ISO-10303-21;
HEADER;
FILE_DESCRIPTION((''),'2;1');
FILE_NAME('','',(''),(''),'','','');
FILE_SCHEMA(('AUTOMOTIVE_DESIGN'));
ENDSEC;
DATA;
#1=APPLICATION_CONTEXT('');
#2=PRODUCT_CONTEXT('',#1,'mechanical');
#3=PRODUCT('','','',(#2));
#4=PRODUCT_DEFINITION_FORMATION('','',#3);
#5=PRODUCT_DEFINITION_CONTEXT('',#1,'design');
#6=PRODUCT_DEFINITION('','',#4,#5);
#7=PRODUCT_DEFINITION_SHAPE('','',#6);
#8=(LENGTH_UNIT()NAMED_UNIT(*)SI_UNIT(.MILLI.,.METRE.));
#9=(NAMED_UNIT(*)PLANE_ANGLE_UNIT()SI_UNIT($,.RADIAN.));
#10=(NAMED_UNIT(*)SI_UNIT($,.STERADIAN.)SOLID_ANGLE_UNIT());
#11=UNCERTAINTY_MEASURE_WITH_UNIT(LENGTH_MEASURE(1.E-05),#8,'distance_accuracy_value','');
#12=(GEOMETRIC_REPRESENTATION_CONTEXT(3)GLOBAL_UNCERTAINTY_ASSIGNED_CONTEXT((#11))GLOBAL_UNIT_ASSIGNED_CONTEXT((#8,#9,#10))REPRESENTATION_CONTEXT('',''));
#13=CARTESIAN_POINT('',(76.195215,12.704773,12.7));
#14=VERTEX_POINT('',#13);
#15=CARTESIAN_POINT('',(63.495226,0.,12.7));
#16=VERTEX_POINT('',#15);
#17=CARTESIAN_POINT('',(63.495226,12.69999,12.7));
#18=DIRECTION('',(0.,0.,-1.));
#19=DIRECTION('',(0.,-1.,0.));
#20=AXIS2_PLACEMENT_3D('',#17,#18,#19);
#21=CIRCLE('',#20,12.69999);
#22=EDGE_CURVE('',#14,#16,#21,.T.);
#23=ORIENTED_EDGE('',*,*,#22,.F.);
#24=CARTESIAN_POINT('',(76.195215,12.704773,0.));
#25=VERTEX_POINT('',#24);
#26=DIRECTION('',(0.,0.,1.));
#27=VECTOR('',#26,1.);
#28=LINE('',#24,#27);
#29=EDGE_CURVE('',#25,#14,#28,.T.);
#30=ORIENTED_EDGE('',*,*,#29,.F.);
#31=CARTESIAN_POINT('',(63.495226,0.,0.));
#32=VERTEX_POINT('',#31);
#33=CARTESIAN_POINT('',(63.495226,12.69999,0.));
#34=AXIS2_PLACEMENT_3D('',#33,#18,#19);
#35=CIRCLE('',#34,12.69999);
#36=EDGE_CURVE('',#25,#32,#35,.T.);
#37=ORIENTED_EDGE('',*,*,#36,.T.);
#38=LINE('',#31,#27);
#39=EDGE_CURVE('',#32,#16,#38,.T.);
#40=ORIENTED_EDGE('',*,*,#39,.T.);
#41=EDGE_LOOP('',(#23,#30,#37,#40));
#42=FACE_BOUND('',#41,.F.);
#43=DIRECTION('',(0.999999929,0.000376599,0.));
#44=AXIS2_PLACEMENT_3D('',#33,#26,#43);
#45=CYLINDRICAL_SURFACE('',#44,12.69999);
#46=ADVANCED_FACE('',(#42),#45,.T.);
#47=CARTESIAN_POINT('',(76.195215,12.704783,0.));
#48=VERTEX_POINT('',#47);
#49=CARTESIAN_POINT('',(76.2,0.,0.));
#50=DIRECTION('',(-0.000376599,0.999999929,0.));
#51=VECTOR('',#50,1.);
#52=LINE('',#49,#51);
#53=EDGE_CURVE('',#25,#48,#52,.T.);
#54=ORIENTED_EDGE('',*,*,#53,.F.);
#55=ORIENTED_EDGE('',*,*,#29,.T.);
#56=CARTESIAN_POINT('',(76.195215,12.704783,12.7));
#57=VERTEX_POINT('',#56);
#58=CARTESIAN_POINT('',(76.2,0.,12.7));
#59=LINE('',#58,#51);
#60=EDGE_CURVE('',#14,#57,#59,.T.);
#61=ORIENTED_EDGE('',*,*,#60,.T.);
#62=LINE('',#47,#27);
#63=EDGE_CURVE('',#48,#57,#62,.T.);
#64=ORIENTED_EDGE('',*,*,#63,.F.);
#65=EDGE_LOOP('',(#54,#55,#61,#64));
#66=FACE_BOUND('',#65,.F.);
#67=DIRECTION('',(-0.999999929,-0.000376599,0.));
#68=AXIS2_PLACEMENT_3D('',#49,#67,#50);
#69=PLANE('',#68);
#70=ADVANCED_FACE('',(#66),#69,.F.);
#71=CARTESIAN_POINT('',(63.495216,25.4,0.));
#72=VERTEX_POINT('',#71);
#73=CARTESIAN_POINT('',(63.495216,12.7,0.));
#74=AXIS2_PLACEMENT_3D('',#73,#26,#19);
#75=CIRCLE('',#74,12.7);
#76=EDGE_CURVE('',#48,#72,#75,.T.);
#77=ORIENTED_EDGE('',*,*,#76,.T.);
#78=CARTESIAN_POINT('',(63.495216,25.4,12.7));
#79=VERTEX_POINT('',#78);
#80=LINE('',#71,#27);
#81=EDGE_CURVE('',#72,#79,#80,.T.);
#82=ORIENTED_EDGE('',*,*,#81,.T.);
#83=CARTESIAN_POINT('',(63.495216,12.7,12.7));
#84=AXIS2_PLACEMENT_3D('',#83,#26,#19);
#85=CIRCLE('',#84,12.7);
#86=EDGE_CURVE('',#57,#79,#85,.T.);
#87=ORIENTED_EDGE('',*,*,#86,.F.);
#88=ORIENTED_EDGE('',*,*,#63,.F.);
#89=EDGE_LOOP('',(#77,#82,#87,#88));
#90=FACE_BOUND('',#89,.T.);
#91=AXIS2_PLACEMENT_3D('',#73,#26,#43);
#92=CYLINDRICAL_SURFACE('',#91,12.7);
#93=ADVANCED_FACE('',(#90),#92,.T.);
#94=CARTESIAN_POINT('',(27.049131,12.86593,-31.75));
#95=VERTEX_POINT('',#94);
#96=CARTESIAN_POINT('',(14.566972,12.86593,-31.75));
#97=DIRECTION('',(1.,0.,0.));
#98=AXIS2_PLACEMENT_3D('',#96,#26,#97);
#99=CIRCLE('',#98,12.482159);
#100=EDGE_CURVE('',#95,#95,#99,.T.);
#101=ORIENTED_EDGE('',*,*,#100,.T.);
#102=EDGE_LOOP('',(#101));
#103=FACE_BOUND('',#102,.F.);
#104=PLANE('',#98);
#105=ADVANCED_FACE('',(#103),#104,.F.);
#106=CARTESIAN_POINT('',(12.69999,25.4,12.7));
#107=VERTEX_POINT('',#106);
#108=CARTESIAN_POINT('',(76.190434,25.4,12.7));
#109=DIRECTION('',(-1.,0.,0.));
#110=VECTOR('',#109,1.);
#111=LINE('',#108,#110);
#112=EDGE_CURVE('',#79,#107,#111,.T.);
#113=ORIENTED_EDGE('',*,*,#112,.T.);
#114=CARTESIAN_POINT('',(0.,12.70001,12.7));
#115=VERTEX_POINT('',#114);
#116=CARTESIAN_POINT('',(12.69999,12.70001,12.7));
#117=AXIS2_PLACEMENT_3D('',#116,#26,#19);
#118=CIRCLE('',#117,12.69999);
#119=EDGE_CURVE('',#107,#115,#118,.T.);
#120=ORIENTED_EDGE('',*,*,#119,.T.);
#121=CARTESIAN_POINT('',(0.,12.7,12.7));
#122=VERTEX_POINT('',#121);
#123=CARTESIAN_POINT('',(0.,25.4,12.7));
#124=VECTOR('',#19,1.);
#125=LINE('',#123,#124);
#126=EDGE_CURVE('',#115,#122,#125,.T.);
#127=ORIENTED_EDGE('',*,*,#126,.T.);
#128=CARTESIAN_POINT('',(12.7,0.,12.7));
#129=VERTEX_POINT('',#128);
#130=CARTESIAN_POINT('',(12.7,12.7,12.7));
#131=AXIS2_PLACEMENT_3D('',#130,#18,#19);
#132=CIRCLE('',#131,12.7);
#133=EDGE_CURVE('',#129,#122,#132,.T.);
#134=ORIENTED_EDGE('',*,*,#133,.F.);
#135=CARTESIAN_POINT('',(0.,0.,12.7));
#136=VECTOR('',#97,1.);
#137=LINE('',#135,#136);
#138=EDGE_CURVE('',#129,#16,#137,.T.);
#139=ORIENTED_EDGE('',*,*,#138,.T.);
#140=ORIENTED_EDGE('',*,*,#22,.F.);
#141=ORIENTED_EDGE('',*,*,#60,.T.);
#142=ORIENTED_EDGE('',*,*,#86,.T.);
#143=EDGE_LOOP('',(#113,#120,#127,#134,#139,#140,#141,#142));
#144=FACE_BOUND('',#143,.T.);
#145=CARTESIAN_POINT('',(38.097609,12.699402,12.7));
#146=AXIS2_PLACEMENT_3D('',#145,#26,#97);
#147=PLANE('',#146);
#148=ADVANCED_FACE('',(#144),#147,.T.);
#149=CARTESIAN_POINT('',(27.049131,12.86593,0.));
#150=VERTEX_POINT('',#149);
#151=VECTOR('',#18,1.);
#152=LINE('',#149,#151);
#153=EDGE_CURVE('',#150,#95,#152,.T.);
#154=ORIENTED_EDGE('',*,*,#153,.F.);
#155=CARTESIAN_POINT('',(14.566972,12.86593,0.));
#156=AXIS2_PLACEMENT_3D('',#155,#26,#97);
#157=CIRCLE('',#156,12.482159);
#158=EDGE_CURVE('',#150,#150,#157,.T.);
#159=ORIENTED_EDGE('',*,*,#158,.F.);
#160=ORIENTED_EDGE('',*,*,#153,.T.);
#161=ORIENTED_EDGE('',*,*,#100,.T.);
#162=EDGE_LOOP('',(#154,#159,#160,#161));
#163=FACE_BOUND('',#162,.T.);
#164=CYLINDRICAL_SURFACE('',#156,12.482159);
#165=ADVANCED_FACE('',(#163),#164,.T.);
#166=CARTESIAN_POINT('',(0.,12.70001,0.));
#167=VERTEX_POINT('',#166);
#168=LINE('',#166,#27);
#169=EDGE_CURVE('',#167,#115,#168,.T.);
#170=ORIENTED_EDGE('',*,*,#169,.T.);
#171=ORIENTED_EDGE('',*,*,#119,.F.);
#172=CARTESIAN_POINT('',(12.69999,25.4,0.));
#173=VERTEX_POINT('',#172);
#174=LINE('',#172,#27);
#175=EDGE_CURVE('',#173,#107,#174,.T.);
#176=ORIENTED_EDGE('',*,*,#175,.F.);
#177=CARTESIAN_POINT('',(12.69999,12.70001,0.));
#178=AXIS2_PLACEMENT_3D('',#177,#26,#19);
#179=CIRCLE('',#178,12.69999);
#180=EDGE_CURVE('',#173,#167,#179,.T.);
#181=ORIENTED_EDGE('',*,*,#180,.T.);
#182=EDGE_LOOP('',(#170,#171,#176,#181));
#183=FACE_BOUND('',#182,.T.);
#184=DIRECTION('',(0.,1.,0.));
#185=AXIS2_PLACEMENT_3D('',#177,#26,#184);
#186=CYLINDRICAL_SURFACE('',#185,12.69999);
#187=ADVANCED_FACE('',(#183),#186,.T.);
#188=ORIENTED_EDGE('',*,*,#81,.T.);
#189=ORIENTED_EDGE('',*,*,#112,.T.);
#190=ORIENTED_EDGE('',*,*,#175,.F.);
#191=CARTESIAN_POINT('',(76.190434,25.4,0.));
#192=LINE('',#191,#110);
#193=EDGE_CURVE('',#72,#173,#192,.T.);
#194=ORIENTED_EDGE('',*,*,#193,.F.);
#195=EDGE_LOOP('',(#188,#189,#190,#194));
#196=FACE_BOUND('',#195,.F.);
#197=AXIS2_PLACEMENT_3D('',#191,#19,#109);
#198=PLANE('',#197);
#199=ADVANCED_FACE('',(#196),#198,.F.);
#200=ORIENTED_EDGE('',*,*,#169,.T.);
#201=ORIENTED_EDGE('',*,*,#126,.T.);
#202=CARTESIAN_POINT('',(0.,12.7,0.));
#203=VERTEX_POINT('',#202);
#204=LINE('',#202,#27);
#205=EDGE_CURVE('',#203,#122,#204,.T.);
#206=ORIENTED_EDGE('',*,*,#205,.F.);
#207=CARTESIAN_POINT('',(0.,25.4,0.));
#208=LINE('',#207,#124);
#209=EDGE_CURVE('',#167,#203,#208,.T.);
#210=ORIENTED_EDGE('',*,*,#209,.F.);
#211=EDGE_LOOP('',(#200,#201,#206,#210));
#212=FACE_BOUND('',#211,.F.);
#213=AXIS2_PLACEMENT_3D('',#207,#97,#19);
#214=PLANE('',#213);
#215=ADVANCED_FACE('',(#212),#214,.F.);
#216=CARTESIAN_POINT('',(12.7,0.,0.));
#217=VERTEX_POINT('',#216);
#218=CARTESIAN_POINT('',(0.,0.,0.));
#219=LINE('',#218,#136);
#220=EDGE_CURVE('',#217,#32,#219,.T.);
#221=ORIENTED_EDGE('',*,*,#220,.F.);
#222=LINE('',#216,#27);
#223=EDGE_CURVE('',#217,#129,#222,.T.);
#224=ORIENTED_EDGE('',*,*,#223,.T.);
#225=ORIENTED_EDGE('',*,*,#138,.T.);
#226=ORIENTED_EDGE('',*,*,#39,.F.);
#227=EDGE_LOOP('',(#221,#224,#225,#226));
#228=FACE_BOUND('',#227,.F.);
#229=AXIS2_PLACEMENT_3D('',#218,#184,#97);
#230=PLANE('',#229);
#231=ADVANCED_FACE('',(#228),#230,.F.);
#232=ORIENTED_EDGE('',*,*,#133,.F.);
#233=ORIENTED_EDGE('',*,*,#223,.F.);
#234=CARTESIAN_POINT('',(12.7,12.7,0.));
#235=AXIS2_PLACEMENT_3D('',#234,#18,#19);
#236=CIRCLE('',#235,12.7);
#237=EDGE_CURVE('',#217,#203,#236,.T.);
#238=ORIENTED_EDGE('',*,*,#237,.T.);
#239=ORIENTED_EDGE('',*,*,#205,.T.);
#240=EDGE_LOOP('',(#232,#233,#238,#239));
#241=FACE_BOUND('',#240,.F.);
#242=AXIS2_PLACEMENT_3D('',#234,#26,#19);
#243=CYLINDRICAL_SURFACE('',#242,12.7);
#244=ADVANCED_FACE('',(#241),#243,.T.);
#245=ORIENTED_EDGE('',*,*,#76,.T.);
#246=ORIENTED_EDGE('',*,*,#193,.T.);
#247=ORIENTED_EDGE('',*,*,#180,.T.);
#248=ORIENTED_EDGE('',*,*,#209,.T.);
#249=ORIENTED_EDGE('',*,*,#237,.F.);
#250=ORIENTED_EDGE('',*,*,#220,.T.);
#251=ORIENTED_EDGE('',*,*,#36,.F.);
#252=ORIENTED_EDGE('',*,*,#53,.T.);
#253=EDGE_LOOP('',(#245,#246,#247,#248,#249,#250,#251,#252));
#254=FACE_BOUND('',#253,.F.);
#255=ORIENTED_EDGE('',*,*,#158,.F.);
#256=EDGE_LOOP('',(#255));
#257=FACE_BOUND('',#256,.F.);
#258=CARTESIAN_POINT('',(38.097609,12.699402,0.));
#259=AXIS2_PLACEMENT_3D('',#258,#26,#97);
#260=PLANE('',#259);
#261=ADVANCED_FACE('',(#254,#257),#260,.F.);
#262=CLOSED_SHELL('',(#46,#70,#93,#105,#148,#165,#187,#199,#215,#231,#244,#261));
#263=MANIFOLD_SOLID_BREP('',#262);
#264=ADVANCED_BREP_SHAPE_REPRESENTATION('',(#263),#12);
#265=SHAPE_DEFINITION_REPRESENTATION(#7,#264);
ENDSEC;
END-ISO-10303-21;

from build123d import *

# Parameters (mm, degrees)
F1_DEPTH = 12.7
F2_R     = 12.7
F3_R     = 12.69999
F4_R     = 12.4821589041
F5_DEPTH = 31.75
F6_DEPTH = 12.7
F7_R     = 12.7
F8_R     = 12.69999


# Not quite as in the source:
# - a fillet or chamfer is up to 0.001 mm smaller than in the source, because OpenCascade refuses the exact size
# - the program builds the solid bodies; features that only make, move or delete a surface that nothing else refers to are left out


with BuildPart() as f1:
    # F0 (on Top) → F1 (new body)
    with BuildSketch(Plane.XY):
        Polygon((0, 25.4), (0, 0), (76.2, 0), (76.1904343963, 25.4), align=None)
    extrude(amount=F1_DEPTH)

    # F2
    f2_edges = [f1.edges().sort_by_distance(p)[0] for p in [
        (76.190434, 25.4, 6.35),
    ]]
    fillet(f2_edges, radius=F2_R)

    # F3 (radius 12.7 in the source; OpenCascade refuses exactly that, so slightly less here)
    f3_edges = [f1.edges().sort_by_distance(p)[0] for p in [
        (76.2, 0, 6.35),
    ]]
    fillet(f3_edges, radius=F3_R)

    # F4 (on Top) → F5 (join)
    with BuildSketch(Plane.XY):
        with Locations((14.5669719204, 12.8659298643)):
            Circle(F4_R)
    extrude(amount=-F5_DEPTH)

    # F6 (add): a face of the model
    f6_faces = [f1.faces().sort_by_distance(p)[0] for p in [
        (14.5669719204, 12.8659298643, -31.75),
    ]]
    extrude(f6_faces, amount=-F6_DEPTH)

    # F7
    f7_edges = [f1.edges().sort_by_distance(p)[0] for p in [
        (0, 0, 6.35),
    ]]
    fillet(f7_edges, radius=F7_R)

    # F8 (radius 12.7 in the source; OpenCascade refuses exactly that, so slightly less here)
    f8_edges = [f1.edges().sort_by_distance(p)[0] for p in [
        (0, 25.4, 6.35),
    ]]
    fillet(f8_edges, radius=F8_R)


solid = f1.part
